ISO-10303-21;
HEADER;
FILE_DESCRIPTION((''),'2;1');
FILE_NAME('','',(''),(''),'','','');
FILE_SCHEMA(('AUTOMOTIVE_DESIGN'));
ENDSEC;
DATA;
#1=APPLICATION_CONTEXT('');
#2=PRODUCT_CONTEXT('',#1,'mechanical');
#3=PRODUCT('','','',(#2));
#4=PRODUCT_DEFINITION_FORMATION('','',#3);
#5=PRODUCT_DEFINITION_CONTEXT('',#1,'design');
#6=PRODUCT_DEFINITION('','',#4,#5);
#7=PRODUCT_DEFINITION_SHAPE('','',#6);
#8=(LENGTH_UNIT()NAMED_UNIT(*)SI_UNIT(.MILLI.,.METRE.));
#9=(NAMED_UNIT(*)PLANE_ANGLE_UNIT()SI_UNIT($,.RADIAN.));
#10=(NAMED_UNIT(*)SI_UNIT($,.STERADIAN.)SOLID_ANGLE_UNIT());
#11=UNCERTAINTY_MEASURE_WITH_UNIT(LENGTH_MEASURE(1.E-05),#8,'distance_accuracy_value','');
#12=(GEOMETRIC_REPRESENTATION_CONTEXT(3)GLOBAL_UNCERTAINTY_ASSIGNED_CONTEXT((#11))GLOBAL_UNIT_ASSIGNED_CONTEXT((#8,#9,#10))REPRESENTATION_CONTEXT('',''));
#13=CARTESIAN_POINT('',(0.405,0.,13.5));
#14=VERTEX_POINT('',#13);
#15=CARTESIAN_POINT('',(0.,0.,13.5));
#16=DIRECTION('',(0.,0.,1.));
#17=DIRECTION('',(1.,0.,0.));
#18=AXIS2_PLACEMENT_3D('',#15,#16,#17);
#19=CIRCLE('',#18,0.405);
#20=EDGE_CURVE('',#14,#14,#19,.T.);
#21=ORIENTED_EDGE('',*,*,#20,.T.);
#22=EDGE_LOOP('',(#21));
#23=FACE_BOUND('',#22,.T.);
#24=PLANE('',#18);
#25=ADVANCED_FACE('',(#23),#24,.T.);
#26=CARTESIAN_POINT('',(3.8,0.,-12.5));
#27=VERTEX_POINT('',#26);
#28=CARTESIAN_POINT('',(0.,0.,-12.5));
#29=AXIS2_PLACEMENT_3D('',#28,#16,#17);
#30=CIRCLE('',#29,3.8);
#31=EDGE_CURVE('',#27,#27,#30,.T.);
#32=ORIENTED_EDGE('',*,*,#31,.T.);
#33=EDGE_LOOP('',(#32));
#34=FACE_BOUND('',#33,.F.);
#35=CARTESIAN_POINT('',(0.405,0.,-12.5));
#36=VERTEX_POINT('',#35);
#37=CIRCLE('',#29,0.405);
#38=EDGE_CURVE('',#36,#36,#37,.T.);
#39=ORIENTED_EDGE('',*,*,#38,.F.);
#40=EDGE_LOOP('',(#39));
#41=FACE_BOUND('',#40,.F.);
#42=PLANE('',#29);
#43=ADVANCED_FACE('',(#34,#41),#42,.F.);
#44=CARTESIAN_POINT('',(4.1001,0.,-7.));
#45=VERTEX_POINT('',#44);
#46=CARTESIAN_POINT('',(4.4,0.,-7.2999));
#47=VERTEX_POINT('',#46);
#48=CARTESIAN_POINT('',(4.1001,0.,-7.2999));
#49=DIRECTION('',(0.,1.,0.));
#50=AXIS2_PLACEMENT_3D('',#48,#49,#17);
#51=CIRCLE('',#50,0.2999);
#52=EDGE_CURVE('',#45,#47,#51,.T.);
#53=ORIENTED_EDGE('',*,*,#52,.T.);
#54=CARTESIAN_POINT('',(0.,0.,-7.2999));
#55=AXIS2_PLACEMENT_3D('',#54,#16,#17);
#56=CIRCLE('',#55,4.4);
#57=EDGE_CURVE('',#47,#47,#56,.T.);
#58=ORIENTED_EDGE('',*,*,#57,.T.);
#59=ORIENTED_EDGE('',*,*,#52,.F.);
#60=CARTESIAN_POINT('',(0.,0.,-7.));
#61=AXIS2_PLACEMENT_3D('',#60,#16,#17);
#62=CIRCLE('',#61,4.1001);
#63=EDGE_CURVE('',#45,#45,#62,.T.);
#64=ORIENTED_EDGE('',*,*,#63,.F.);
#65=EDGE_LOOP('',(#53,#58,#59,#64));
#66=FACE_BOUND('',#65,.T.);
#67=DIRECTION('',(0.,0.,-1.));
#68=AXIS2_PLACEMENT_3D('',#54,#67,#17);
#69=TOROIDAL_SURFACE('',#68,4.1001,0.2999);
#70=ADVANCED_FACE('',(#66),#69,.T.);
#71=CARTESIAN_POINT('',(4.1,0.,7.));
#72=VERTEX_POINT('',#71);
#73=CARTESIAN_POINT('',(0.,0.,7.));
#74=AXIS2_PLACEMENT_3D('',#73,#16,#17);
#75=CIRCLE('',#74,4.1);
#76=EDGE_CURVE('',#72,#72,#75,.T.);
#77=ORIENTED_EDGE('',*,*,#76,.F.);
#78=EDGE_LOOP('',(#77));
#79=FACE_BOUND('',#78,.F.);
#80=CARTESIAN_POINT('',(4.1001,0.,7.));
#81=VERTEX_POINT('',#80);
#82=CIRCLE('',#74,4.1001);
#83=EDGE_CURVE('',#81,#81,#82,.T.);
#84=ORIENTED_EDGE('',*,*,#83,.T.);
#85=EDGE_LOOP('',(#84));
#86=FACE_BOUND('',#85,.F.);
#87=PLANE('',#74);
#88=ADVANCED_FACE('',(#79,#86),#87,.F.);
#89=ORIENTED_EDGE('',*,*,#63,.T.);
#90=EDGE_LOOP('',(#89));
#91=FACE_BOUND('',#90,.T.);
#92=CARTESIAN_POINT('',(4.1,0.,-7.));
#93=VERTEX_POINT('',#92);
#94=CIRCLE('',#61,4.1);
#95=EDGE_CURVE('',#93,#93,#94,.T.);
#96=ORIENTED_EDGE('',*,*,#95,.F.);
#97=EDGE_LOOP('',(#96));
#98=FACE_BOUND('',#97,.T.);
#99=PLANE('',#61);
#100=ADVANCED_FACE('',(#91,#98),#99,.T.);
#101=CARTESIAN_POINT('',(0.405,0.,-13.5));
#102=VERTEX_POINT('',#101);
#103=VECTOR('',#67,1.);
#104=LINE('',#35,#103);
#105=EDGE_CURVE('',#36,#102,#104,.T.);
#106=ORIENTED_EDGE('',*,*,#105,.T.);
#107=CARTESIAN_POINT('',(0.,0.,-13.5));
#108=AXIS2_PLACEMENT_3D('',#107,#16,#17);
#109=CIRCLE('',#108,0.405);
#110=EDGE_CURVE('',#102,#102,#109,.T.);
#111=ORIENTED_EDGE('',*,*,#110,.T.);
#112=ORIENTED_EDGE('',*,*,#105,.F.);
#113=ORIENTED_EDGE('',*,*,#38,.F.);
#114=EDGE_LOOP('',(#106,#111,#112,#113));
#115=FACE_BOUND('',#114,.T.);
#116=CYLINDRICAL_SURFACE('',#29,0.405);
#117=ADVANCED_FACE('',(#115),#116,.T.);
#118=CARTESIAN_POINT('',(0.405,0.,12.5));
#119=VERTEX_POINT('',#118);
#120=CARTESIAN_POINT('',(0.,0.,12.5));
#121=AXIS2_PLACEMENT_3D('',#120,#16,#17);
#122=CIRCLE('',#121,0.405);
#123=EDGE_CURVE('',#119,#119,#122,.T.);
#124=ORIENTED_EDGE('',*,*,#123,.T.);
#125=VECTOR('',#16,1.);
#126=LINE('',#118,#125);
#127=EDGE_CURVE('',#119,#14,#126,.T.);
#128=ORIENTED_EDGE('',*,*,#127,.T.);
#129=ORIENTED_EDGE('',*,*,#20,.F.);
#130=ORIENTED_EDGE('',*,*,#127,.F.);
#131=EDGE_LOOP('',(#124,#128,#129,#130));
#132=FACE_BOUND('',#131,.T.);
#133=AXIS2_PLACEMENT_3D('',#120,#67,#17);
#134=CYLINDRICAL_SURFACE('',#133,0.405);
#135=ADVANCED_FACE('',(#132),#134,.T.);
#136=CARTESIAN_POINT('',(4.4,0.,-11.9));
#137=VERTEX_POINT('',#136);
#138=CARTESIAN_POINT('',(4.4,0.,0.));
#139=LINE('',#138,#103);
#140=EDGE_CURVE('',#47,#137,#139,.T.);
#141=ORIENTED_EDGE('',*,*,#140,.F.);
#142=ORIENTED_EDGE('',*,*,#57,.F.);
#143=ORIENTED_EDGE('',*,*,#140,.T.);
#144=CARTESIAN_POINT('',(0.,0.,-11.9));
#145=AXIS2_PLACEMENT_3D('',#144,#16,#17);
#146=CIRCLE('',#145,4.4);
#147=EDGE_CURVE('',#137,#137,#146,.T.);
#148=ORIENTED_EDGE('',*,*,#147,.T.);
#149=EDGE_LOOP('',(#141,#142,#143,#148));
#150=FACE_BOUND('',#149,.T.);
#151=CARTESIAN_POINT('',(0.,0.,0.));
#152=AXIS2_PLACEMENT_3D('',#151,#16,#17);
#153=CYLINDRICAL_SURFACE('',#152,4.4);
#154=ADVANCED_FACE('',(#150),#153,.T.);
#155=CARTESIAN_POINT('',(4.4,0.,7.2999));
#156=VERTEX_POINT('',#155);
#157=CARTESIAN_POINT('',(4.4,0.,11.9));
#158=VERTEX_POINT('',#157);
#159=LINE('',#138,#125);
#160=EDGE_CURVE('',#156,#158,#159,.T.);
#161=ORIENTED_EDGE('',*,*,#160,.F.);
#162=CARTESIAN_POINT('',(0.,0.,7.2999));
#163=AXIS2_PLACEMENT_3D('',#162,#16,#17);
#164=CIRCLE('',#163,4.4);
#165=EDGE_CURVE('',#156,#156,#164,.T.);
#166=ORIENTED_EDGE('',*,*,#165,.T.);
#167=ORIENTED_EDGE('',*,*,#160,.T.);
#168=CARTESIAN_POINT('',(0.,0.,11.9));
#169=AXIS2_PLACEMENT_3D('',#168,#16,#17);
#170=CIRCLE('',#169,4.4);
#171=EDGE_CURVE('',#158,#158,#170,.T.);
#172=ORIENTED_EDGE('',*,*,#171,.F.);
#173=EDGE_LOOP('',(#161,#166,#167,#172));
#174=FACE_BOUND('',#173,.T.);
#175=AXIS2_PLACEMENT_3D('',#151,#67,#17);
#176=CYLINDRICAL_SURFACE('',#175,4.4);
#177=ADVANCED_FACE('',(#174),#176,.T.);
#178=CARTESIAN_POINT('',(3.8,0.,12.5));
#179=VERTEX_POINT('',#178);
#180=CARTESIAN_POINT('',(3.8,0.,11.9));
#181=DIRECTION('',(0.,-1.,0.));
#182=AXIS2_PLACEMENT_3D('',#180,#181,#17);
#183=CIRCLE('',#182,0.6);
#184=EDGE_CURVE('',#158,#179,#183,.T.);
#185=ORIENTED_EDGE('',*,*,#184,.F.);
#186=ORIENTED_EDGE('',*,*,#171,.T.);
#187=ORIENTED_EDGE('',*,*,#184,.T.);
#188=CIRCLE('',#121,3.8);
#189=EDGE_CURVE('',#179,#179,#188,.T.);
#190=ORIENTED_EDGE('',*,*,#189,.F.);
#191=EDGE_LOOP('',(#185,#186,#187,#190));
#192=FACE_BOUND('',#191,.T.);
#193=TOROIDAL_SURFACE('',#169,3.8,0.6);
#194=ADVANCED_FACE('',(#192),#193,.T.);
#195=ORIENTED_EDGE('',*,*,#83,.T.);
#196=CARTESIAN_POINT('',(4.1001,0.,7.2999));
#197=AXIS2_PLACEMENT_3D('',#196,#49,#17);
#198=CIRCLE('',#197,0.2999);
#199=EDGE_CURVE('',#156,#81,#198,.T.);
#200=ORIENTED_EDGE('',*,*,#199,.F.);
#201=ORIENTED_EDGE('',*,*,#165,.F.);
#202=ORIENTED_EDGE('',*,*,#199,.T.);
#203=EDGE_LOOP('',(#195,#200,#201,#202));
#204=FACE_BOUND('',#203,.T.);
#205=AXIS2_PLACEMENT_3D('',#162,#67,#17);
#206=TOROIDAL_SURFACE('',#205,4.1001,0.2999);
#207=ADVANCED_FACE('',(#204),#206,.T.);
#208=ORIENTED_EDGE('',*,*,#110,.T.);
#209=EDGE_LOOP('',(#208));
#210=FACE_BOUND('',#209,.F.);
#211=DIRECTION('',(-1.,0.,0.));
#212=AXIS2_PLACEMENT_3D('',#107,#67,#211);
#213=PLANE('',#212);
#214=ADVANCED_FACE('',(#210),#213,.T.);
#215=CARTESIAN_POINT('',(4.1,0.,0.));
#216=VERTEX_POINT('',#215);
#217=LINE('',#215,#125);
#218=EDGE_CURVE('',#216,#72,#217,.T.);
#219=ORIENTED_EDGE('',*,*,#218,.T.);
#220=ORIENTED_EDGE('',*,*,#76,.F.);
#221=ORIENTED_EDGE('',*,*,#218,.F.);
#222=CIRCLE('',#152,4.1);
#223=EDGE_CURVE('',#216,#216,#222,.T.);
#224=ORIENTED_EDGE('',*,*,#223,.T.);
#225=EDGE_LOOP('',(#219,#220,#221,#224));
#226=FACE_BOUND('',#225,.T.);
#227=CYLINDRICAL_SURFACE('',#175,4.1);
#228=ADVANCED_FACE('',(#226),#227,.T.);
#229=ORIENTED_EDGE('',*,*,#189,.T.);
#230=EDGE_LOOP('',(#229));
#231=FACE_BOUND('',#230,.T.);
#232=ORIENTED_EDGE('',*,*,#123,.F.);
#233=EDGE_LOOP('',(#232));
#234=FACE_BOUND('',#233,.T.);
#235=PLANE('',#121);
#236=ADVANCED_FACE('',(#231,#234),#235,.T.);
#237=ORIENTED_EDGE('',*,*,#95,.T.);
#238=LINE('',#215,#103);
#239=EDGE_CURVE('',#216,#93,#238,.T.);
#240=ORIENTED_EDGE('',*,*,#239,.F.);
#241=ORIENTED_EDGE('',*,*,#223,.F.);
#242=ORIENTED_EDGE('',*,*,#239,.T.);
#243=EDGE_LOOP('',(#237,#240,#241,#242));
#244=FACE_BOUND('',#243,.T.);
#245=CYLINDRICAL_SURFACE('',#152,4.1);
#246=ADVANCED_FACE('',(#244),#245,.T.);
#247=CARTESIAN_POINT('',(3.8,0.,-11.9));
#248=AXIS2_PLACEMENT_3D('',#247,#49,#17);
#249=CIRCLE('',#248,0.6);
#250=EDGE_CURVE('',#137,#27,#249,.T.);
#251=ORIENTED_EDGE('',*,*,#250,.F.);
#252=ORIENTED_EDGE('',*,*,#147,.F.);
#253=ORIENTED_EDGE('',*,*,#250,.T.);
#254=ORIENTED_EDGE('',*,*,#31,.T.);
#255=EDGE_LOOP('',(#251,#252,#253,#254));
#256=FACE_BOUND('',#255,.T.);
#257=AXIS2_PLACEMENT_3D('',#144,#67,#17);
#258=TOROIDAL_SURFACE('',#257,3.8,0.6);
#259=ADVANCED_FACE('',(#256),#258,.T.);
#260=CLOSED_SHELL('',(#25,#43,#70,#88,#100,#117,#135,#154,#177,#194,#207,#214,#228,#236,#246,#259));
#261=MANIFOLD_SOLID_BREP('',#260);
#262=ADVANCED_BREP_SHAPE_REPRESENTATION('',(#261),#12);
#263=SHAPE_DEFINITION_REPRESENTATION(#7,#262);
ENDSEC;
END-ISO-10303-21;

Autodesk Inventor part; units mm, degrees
ref_plane "YZ Plane" through (0, 0, 0) normal (1, 0, 0) x (0, 1, 0)
ref_plane "XZ Plane" through (0, 0, 0) normal (0, 1, 0) x (-1, 0, 0)
ref_plane "XY Plane" through (0, 0, 0) normal (0, 0, 1) x (1, 0, 0)
sketch "Skizze1" plane through (0, 0, 0) normal (0, 0, 1) x (1, 0, 0)
  circle A0 centre (0, 0) radius 4.4
  dimension "d0" = 8.8
extrude "Extrusion1" add sketch "Skizze1" along normal mid plane 25
sketch "Skizze4" plane through (0, 0, 0) normal (0, 0, 1) x (1, 0, 0)
  circle A0 centre (0, 0) radius 4.4 projected
  circle A1 centre (0, 0) radius 4.1
  dimension "d10" = 0.3
extrude "Extrusion4" cut sketch "Skizze4" along normal mid plane 14
fillet "Rundung1" radius 0.3 2 edges at (-4.4, 0, 7) (-4.4, 0, -7)
fillet "Rundung2" radius 0.6 2 edges at (-4.4, 0, 12.5) (-4.4, 0, -12.5)
sketch "Skizze6" plane through (0, 0, 12.5) normal (0, 0, 1) x (1, 0, 0)
  circle A0 centre (0, 0) radius 0.405
  dimension "d21" = 0.81
extrude "Extrusion6" add sketch "Skizze6" along normal blind 1
mirror "Spiegeln3" about plane through (0, 0, 0) normal (0, 0, 1) of "Extrusion6"
properties part number "resistor WHS7 68R" material "Gummi, Silikon"
